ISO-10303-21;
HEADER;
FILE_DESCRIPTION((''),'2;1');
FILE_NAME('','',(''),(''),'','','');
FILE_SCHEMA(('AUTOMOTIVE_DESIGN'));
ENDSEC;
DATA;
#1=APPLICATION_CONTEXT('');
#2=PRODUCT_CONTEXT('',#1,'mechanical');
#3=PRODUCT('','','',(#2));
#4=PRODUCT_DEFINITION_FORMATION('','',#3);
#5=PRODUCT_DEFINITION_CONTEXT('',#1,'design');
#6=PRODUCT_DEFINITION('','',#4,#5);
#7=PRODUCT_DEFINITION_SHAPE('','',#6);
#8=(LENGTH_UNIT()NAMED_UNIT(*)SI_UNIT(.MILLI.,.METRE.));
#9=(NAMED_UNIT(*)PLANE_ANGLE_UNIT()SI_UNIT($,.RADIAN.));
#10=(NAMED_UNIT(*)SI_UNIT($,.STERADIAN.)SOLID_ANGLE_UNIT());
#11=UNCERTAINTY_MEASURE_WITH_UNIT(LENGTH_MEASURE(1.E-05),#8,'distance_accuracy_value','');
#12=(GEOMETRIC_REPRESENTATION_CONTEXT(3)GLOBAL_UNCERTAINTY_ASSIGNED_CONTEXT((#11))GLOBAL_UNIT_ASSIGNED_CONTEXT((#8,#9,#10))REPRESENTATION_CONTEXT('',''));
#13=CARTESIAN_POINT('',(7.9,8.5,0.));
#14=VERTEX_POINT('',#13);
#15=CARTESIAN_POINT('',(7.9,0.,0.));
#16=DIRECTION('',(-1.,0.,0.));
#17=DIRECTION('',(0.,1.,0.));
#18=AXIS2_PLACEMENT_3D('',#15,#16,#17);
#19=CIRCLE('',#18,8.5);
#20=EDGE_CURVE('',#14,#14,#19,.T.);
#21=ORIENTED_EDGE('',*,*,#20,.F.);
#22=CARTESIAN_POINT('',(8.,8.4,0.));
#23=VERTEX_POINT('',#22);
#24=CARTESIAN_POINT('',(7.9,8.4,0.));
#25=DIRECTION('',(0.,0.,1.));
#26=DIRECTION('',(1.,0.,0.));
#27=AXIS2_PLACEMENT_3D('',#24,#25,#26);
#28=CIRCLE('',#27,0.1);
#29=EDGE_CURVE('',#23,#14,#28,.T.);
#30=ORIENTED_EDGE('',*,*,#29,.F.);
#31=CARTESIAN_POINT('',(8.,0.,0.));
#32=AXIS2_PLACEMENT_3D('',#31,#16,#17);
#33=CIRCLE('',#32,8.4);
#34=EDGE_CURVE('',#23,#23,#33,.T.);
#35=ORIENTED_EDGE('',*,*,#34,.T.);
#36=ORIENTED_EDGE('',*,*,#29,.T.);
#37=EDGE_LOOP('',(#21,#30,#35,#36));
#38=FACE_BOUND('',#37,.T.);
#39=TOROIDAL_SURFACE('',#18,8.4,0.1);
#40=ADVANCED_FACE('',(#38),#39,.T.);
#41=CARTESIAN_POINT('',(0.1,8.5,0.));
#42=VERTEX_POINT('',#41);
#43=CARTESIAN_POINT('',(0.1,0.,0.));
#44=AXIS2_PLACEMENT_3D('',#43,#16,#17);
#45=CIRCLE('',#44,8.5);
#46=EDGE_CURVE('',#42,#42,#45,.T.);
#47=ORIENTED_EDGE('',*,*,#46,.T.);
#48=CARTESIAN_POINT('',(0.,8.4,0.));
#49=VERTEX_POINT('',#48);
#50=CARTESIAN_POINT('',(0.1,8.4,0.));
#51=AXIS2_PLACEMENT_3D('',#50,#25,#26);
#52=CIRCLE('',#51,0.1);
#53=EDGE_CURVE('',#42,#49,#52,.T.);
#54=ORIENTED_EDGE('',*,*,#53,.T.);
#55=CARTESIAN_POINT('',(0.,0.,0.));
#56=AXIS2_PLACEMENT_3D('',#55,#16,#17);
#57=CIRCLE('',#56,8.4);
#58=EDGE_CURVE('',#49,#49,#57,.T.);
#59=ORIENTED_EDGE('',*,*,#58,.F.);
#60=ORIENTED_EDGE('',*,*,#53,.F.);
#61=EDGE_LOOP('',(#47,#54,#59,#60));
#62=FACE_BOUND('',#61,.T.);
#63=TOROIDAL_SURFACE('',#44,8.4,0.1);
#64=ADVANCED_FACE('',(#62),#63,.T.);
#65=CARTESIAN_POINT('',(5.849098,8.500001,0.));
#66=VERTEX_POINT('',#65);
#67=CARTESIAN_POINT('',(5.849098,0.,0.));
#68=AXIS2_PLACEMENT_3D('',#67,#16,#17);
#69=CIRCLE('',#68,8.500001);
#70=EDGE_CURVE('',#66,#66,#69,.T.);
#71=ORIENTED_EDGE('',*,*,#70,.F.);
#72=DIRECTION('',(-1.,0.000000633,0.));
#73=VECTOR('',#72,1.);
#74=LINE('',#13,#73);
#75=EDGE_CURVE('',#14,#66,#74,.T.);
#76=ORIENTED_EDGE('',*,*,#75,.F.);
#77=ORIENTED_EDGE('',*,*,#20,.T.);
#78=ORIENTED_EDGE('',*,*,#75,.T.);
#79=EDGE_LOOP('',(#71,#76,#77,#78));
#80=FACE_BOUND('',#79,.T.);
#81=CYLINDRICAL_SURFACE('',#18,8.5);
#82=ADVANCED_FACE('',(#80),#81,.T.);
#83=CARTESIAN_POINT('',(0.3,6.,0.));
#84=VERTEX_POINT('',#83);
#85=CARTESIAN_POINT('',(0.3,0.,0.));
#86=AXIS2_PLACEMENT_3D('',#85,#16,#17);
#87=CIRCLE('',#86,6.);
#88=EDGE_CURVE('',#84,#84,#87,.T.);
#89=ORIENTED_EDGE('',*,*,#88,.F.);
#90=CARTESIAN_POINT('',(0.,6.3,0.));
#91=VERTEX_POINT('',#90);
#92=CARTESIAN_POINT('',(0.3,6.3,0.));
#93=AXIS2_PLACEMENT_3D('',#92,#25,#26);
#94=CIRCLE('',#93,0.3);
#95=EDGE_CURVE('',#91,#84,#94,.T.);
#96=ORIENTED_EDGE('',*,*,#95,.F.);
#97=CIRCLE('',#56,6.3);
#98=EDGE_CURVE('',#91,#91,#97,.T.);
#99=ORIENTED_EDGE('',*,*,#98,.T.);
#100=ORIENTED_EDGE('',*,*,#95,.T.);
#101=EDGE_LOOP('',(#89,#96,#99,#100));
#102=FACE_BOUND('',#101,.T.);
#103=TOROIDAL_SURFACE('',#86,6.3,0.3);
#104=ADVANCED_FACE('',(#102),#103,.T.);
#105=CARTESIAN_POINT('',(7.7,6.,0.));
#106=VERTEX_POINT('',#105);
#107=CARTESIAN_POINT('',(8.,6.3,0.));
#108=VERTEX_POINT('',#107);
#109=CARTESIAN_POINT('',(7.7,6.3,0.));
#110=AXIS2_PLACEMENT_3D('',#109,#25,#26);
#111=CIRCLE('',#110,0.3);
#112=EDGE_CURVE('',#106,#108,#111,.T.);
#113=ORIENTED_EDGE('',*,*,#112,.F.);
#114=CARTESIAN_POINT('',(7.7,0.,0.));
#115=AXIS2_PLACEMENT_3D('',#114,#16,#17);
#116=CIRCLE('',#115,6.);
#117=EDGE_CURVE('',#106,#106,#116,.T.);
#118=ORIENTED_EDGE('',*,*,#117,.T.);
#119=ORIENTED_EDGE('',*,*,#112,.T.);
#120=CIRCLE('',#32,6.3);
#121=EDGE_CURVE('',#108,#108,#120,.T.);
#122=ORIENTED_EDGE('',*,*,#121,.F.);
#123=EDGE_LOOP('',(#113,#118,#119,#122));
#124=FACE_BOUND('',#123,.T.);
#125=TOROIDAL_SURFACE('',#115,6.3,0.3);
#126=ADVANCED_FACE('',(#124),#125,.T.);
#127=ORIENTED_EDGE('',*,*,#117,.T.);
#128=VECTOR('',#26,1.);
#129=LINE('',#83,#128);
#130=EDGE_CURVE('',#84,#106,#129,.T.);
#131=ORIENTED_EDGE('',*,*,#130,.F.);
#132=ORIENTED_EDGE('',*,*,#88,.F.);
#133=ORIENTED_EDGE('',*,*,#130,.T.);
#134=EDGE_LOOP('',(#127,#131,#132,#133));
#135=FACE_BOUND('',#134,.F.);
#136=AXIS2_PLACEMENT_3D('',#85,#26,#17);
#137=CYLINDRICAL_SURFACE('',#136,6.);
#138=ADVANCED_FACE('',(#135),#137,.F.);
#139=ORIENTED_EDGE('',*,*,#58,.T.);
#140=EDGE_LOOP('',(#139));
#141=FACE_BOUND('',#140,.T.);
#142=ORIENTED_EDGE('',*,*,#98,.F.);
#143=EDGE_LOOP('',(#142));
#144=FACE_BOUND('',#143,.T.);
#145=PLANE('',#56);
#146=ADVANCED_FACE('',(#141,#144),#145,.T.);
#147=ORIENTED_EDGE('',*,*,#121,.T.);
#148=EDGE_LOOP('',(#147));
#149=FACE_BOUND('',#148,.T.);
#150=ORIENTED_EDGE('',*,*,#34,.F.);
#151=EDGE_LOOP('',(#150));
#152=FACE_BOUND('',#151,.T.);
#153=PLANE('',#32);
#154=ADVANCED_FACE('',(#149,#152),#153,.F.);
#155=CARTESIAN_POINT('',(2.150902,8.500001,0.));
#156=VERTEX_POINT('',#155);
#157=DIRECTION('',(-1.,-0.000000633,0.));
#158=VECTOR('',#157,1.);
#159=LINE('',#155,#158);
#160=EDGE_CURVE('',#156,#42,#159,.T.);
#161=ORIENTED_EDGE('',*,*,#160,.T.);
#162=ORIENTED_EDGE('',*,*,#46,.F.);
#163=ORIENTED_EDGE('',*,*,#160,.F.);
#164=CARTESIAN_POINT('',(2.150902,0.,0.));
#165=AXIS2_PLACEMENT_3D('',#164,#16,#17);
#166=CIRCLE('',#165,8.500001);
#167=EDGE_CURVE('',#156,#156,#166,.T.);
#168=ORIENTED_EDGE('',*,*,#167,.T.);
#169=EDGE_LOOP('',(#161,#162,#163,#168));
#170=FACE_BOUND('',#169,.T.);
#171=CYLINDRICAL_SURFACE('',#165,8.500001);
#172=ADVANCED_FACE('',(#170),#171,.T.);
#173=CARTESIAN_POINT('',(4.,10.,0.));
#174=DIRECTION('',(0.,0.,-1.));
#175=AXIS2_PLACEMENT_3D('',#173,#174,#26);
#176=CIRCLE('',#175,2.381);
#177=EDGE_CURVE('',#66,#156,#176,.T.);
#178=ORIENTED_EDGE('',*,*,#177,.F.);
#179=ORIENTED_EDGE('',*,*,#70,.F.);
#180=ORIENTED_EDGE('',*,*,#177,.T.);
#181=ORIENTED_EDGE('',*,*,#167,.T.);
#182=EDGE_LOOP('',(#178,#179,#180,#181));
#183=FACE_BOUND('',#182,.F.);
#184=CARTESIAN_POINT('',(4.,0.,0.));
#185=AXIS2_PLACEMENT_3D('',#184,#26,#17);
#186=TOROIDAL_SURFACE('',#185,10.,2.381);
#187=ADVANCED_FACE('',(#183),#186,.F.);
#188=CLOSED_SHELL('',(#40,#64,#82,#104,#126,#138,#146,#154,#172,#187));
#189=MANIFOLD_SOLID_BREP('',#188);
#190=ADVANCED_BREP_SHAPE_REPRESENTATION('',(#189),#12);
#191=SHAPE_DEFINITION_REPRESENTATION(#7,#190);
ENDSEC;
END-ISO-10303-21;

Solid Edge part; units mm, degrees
sketch "Sketch1" plane through (0, 0, 0) normal (0, 0, 1) x (1, 0, 0)
  arc A0 (0, 6.3) -> (0.3, 6) centre (0.3, 6.3) ccw
  line L0 (0.3, 6) -> (7.7, 6)
  arc A1 (7.7, 6) -> (8, 6.3) centre (7.7, 6.3) ccw
  line L1 (8, 6.3) -> (8, 8.4)
  arc A2 (8, 8.4) -> (7.9, 8.5) centre (7.9, 8.4) ccw
  line L2 (7.9, 8.5) -> (5.8491, 8.5)
  arc A3 (5.8491, 8.5) -> (2.1509, 8.5) centre (4, 10) cw
  line L3 (2.1509, 8.5) -> (0.1, 8.5)
  arc A4 (0.1, 8.5) -> (0, 8.4) centre (0.1, 8.4) ccw
  line L4 (0, 8.4) -> (0, 6.3)
revolve "RevolvedProtrusion1" add sketch "Sketch1" angle 360 about axis through (100, 0, 0) along (-1, 0, 0)
properties part number "SKF_6001_ir"
